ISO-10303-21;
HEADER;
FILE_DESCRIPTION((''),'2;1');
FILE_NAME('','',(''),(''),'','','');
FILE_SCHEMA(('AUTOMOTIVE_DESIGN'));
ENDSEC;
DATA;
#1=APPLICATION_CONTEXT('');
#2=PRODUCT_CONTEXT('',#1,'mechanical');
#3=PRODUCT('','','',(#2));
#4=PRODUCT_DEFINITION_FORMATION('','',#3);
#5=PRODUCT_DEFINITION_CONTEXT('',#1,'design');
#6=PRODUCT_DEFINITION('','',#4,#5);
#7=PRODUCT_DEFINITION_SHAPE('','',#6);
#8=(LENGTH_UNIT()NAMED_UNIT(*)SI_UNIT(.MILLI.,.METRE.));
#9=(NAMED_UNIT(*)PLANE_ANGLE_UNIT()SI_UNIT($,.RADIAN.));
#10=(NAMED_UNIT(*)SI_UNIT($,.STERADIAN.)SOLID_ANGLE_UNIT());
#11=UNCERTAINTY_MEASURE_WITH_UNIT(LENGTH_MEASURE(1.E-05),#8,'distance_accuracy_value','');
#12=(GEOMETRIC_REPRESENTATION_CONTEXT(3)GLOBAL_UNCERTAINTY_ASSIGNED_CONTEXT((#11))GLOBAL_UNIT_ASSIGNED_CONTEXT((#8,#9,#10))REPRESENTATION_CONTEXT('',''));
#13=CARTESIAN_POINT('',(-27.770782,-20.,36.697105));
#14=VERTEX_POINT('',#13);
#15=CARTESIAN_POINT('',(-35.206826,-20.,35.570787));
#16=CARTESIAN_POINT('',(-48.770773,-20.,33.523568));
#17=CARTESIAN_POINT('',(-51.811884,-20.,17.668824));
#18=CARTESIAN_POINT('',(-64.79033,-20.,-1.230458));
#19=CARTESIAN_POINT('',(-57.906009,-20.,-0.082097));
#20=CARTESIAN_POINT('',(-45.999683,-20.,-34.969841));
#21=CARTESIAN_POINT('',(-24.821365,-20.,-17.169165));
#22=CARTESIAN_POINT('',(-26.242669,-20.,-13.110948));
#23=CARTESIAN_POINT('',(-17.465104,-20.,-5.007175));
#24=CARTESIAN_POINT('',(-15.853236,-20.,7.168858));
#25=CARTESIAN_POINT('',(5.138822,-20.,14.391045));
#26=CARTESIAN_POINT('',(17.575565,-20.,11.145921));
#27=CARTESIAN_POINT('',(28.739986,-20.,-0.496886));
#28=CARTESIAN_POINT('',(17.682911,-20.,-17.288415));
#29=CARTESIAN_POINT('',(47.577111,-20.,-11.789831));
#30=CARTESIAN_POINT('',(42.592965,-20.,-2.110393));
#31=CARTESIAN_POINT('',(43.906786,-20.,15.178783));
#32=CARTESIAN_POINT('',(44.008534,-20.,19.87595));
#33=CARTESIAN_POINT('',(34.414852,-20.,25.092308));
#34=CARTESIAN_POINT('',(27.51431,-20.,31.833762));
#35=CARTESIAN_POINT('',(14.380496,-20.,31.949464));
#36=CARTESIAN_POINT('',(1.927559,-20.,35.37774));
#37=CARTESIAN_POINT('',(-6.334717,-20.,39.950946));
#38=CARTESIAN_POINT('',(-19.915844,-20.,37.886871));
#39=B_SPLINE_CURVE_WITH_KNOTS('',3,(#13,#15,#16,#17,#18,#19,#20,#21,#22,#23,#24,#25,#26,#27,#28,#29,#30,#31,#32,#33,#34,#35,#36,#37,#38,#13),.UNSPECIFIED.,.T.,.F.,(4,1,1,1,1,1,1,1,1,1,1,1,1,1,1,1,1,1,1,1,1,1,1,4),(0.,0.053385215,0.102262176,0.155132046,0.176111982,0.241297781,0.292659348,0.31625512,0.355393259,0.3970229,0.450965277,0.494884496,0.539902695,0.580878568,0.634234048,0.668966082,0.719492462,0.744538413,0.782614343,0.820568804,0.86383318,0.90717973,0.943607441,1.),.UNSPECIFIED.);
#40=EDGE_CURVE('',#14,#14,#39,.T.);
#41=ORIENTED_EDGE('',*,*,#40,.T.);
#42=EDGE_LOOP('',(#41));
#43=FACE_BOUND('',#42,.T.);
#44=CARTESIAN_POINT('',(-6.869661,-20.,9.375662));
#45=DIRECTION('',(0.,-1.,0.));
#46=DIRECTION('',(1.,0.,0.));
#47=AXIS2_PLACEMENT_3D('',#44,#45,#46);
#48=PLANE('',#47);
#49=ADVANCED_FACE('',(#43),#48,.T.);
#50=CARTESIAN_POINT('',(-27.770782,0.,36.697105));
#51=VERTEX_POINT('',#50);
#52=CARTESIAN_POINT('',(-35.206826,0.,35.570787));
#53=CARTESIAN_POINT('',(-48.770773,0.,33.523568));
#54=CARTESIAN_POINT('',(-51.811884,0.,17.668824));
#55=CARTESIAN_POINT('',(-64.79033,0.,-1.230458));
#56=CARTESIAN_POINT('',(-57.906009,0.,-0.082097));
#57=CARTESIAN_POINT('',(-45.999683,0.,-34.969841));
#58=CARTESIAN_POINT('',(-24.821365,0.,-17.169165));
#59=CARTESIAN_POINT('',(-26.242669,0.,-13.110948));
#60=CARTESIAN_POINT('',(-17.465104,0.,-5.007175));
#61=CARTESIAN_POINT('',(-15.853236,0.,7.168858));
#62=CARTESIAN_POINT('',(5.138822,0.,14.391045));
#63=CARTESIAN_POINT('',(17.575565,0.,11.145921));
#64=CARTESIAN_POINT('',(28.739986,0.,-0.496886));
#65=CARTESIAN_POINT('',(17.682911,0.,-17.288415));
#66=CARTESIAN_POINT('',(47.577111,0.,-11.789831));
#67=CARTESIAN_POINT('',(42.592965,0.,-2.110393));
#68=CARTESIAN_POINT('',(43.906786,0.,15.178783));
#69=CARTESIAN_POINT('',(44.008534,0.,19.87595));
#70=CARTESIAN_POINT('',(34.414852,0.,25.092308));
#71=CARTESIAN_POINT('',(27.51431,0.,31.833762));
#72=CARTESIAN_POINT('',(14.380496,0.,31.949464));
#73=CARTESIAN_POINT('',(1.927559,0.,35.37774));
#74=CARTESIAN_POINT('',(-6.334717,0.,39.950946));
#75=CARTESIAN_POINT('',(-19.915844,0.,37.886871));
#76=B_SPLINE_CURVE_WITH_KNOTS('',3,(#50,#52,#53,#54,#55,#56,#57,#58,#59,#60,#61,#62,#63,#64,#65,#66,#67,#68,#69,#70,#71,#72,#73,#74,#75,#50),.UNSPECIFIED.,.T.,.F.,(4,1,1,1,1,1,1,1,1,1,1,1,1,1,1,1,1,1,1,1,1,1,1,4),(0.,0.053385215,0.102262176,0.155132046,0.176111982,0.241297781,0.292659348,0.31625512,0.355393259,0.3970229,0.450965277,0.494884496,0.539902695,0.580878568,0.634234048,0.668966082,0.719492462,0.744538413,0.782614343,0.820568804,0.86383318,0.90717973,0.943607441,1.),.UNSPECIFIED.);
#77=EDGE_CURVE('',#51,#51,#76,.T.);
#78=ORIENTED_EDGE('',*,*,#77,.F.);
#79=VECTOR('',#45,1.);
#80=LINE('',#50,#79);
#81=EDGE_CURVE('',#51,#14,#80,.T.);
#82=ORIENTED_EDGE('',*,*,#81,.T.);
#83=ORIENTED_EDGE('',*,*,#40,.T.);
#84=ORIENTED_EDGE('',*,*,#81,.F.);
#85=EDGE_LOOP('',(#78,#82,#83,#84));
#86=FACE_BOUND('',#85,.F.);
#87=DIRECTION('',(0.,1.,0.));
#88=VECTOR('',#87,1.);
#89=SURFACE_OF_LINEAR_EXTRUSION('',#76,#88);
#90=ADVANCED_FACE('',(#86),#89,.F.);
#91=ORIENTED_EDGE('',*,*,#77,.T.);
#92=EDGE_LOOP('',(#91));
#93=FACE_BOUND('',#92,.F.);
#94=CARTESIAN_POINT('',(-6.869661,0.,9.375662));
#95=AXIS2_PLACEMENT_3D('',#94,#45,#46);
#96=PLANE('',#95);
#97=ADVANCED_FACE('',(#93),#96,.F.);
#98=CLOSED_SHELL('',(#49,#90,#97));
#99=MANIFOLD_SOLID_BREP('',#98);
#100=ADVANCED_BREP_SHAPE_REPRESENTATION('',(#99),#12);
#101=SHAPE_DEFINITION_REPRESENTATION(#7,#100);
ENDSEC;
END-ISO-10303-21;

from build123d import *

# Parameters (mm, degrees)
F1_DEPTH = 20


with BuildPart() as f1:
    # F0 (on Front) → F1 (new body)
    with BuildSketch(Plane.XZ):
        with BuildLine():
            add(Edge.make_bspline(
                [(-27.7707818896, 36.6971045732), (-35.2068259317, 35.5707865733), (-48.7707734033, 33.5235680909), (-51.8118838739, 17.6688240353), (-64.7903300066, -1.2304576595), (-57.9060088757, -0.0820970655), (-45.9996826528, -34.9698414711), (-24.8213652788, -17.1691649535), (-26.242668849, -13.1109480644), (-17.465103742, -5.0071751597), (-15.853235551, 7.1688575386), (5.1388222938, 14.3910453001), (17.5755650792, 11.1459214841), (28.7399857708, -0.4968858727), (17.6829108394, -17.2884154648), (47.577110955, -11.7898307903), (42.5929647247, -2.1103929319), (43.9067861507, 15.178782936), (44.0085342563, 19.8759495054), (34.4148517734, 25.0923081147), (27.5143101021, 31.833762258), (14.3804963791, 31.9494642941), (1.9275594929, 35.377740195), (-6.3347166389, 39.9509460071), (-19.9158439897, 37.8868713222), (-27.7707818896, 36.6971045732)],
                knots=[0, 0, 0, 0, 0.0533852154, 0.1022621764, 0.1551320457, 0.1761119821, 0.2412977813, 0.2926593483, 0.3162551201, 0.3553932588, 0.3970229002, 0.450965277, 0.4948844957, 0.5399026954, 0.5808785683, 0.6342340481, 0.6689660823, 0.7194924623, 0.7445384129, 0.7826143431, 0.8205688042, 0.8638331795, 0.9071797297, 0.9436074411, 1, 1, 1, 1], degree=3))
        make_face()
    extrude(amount=F1_DEPTH)


solid = f1.part
